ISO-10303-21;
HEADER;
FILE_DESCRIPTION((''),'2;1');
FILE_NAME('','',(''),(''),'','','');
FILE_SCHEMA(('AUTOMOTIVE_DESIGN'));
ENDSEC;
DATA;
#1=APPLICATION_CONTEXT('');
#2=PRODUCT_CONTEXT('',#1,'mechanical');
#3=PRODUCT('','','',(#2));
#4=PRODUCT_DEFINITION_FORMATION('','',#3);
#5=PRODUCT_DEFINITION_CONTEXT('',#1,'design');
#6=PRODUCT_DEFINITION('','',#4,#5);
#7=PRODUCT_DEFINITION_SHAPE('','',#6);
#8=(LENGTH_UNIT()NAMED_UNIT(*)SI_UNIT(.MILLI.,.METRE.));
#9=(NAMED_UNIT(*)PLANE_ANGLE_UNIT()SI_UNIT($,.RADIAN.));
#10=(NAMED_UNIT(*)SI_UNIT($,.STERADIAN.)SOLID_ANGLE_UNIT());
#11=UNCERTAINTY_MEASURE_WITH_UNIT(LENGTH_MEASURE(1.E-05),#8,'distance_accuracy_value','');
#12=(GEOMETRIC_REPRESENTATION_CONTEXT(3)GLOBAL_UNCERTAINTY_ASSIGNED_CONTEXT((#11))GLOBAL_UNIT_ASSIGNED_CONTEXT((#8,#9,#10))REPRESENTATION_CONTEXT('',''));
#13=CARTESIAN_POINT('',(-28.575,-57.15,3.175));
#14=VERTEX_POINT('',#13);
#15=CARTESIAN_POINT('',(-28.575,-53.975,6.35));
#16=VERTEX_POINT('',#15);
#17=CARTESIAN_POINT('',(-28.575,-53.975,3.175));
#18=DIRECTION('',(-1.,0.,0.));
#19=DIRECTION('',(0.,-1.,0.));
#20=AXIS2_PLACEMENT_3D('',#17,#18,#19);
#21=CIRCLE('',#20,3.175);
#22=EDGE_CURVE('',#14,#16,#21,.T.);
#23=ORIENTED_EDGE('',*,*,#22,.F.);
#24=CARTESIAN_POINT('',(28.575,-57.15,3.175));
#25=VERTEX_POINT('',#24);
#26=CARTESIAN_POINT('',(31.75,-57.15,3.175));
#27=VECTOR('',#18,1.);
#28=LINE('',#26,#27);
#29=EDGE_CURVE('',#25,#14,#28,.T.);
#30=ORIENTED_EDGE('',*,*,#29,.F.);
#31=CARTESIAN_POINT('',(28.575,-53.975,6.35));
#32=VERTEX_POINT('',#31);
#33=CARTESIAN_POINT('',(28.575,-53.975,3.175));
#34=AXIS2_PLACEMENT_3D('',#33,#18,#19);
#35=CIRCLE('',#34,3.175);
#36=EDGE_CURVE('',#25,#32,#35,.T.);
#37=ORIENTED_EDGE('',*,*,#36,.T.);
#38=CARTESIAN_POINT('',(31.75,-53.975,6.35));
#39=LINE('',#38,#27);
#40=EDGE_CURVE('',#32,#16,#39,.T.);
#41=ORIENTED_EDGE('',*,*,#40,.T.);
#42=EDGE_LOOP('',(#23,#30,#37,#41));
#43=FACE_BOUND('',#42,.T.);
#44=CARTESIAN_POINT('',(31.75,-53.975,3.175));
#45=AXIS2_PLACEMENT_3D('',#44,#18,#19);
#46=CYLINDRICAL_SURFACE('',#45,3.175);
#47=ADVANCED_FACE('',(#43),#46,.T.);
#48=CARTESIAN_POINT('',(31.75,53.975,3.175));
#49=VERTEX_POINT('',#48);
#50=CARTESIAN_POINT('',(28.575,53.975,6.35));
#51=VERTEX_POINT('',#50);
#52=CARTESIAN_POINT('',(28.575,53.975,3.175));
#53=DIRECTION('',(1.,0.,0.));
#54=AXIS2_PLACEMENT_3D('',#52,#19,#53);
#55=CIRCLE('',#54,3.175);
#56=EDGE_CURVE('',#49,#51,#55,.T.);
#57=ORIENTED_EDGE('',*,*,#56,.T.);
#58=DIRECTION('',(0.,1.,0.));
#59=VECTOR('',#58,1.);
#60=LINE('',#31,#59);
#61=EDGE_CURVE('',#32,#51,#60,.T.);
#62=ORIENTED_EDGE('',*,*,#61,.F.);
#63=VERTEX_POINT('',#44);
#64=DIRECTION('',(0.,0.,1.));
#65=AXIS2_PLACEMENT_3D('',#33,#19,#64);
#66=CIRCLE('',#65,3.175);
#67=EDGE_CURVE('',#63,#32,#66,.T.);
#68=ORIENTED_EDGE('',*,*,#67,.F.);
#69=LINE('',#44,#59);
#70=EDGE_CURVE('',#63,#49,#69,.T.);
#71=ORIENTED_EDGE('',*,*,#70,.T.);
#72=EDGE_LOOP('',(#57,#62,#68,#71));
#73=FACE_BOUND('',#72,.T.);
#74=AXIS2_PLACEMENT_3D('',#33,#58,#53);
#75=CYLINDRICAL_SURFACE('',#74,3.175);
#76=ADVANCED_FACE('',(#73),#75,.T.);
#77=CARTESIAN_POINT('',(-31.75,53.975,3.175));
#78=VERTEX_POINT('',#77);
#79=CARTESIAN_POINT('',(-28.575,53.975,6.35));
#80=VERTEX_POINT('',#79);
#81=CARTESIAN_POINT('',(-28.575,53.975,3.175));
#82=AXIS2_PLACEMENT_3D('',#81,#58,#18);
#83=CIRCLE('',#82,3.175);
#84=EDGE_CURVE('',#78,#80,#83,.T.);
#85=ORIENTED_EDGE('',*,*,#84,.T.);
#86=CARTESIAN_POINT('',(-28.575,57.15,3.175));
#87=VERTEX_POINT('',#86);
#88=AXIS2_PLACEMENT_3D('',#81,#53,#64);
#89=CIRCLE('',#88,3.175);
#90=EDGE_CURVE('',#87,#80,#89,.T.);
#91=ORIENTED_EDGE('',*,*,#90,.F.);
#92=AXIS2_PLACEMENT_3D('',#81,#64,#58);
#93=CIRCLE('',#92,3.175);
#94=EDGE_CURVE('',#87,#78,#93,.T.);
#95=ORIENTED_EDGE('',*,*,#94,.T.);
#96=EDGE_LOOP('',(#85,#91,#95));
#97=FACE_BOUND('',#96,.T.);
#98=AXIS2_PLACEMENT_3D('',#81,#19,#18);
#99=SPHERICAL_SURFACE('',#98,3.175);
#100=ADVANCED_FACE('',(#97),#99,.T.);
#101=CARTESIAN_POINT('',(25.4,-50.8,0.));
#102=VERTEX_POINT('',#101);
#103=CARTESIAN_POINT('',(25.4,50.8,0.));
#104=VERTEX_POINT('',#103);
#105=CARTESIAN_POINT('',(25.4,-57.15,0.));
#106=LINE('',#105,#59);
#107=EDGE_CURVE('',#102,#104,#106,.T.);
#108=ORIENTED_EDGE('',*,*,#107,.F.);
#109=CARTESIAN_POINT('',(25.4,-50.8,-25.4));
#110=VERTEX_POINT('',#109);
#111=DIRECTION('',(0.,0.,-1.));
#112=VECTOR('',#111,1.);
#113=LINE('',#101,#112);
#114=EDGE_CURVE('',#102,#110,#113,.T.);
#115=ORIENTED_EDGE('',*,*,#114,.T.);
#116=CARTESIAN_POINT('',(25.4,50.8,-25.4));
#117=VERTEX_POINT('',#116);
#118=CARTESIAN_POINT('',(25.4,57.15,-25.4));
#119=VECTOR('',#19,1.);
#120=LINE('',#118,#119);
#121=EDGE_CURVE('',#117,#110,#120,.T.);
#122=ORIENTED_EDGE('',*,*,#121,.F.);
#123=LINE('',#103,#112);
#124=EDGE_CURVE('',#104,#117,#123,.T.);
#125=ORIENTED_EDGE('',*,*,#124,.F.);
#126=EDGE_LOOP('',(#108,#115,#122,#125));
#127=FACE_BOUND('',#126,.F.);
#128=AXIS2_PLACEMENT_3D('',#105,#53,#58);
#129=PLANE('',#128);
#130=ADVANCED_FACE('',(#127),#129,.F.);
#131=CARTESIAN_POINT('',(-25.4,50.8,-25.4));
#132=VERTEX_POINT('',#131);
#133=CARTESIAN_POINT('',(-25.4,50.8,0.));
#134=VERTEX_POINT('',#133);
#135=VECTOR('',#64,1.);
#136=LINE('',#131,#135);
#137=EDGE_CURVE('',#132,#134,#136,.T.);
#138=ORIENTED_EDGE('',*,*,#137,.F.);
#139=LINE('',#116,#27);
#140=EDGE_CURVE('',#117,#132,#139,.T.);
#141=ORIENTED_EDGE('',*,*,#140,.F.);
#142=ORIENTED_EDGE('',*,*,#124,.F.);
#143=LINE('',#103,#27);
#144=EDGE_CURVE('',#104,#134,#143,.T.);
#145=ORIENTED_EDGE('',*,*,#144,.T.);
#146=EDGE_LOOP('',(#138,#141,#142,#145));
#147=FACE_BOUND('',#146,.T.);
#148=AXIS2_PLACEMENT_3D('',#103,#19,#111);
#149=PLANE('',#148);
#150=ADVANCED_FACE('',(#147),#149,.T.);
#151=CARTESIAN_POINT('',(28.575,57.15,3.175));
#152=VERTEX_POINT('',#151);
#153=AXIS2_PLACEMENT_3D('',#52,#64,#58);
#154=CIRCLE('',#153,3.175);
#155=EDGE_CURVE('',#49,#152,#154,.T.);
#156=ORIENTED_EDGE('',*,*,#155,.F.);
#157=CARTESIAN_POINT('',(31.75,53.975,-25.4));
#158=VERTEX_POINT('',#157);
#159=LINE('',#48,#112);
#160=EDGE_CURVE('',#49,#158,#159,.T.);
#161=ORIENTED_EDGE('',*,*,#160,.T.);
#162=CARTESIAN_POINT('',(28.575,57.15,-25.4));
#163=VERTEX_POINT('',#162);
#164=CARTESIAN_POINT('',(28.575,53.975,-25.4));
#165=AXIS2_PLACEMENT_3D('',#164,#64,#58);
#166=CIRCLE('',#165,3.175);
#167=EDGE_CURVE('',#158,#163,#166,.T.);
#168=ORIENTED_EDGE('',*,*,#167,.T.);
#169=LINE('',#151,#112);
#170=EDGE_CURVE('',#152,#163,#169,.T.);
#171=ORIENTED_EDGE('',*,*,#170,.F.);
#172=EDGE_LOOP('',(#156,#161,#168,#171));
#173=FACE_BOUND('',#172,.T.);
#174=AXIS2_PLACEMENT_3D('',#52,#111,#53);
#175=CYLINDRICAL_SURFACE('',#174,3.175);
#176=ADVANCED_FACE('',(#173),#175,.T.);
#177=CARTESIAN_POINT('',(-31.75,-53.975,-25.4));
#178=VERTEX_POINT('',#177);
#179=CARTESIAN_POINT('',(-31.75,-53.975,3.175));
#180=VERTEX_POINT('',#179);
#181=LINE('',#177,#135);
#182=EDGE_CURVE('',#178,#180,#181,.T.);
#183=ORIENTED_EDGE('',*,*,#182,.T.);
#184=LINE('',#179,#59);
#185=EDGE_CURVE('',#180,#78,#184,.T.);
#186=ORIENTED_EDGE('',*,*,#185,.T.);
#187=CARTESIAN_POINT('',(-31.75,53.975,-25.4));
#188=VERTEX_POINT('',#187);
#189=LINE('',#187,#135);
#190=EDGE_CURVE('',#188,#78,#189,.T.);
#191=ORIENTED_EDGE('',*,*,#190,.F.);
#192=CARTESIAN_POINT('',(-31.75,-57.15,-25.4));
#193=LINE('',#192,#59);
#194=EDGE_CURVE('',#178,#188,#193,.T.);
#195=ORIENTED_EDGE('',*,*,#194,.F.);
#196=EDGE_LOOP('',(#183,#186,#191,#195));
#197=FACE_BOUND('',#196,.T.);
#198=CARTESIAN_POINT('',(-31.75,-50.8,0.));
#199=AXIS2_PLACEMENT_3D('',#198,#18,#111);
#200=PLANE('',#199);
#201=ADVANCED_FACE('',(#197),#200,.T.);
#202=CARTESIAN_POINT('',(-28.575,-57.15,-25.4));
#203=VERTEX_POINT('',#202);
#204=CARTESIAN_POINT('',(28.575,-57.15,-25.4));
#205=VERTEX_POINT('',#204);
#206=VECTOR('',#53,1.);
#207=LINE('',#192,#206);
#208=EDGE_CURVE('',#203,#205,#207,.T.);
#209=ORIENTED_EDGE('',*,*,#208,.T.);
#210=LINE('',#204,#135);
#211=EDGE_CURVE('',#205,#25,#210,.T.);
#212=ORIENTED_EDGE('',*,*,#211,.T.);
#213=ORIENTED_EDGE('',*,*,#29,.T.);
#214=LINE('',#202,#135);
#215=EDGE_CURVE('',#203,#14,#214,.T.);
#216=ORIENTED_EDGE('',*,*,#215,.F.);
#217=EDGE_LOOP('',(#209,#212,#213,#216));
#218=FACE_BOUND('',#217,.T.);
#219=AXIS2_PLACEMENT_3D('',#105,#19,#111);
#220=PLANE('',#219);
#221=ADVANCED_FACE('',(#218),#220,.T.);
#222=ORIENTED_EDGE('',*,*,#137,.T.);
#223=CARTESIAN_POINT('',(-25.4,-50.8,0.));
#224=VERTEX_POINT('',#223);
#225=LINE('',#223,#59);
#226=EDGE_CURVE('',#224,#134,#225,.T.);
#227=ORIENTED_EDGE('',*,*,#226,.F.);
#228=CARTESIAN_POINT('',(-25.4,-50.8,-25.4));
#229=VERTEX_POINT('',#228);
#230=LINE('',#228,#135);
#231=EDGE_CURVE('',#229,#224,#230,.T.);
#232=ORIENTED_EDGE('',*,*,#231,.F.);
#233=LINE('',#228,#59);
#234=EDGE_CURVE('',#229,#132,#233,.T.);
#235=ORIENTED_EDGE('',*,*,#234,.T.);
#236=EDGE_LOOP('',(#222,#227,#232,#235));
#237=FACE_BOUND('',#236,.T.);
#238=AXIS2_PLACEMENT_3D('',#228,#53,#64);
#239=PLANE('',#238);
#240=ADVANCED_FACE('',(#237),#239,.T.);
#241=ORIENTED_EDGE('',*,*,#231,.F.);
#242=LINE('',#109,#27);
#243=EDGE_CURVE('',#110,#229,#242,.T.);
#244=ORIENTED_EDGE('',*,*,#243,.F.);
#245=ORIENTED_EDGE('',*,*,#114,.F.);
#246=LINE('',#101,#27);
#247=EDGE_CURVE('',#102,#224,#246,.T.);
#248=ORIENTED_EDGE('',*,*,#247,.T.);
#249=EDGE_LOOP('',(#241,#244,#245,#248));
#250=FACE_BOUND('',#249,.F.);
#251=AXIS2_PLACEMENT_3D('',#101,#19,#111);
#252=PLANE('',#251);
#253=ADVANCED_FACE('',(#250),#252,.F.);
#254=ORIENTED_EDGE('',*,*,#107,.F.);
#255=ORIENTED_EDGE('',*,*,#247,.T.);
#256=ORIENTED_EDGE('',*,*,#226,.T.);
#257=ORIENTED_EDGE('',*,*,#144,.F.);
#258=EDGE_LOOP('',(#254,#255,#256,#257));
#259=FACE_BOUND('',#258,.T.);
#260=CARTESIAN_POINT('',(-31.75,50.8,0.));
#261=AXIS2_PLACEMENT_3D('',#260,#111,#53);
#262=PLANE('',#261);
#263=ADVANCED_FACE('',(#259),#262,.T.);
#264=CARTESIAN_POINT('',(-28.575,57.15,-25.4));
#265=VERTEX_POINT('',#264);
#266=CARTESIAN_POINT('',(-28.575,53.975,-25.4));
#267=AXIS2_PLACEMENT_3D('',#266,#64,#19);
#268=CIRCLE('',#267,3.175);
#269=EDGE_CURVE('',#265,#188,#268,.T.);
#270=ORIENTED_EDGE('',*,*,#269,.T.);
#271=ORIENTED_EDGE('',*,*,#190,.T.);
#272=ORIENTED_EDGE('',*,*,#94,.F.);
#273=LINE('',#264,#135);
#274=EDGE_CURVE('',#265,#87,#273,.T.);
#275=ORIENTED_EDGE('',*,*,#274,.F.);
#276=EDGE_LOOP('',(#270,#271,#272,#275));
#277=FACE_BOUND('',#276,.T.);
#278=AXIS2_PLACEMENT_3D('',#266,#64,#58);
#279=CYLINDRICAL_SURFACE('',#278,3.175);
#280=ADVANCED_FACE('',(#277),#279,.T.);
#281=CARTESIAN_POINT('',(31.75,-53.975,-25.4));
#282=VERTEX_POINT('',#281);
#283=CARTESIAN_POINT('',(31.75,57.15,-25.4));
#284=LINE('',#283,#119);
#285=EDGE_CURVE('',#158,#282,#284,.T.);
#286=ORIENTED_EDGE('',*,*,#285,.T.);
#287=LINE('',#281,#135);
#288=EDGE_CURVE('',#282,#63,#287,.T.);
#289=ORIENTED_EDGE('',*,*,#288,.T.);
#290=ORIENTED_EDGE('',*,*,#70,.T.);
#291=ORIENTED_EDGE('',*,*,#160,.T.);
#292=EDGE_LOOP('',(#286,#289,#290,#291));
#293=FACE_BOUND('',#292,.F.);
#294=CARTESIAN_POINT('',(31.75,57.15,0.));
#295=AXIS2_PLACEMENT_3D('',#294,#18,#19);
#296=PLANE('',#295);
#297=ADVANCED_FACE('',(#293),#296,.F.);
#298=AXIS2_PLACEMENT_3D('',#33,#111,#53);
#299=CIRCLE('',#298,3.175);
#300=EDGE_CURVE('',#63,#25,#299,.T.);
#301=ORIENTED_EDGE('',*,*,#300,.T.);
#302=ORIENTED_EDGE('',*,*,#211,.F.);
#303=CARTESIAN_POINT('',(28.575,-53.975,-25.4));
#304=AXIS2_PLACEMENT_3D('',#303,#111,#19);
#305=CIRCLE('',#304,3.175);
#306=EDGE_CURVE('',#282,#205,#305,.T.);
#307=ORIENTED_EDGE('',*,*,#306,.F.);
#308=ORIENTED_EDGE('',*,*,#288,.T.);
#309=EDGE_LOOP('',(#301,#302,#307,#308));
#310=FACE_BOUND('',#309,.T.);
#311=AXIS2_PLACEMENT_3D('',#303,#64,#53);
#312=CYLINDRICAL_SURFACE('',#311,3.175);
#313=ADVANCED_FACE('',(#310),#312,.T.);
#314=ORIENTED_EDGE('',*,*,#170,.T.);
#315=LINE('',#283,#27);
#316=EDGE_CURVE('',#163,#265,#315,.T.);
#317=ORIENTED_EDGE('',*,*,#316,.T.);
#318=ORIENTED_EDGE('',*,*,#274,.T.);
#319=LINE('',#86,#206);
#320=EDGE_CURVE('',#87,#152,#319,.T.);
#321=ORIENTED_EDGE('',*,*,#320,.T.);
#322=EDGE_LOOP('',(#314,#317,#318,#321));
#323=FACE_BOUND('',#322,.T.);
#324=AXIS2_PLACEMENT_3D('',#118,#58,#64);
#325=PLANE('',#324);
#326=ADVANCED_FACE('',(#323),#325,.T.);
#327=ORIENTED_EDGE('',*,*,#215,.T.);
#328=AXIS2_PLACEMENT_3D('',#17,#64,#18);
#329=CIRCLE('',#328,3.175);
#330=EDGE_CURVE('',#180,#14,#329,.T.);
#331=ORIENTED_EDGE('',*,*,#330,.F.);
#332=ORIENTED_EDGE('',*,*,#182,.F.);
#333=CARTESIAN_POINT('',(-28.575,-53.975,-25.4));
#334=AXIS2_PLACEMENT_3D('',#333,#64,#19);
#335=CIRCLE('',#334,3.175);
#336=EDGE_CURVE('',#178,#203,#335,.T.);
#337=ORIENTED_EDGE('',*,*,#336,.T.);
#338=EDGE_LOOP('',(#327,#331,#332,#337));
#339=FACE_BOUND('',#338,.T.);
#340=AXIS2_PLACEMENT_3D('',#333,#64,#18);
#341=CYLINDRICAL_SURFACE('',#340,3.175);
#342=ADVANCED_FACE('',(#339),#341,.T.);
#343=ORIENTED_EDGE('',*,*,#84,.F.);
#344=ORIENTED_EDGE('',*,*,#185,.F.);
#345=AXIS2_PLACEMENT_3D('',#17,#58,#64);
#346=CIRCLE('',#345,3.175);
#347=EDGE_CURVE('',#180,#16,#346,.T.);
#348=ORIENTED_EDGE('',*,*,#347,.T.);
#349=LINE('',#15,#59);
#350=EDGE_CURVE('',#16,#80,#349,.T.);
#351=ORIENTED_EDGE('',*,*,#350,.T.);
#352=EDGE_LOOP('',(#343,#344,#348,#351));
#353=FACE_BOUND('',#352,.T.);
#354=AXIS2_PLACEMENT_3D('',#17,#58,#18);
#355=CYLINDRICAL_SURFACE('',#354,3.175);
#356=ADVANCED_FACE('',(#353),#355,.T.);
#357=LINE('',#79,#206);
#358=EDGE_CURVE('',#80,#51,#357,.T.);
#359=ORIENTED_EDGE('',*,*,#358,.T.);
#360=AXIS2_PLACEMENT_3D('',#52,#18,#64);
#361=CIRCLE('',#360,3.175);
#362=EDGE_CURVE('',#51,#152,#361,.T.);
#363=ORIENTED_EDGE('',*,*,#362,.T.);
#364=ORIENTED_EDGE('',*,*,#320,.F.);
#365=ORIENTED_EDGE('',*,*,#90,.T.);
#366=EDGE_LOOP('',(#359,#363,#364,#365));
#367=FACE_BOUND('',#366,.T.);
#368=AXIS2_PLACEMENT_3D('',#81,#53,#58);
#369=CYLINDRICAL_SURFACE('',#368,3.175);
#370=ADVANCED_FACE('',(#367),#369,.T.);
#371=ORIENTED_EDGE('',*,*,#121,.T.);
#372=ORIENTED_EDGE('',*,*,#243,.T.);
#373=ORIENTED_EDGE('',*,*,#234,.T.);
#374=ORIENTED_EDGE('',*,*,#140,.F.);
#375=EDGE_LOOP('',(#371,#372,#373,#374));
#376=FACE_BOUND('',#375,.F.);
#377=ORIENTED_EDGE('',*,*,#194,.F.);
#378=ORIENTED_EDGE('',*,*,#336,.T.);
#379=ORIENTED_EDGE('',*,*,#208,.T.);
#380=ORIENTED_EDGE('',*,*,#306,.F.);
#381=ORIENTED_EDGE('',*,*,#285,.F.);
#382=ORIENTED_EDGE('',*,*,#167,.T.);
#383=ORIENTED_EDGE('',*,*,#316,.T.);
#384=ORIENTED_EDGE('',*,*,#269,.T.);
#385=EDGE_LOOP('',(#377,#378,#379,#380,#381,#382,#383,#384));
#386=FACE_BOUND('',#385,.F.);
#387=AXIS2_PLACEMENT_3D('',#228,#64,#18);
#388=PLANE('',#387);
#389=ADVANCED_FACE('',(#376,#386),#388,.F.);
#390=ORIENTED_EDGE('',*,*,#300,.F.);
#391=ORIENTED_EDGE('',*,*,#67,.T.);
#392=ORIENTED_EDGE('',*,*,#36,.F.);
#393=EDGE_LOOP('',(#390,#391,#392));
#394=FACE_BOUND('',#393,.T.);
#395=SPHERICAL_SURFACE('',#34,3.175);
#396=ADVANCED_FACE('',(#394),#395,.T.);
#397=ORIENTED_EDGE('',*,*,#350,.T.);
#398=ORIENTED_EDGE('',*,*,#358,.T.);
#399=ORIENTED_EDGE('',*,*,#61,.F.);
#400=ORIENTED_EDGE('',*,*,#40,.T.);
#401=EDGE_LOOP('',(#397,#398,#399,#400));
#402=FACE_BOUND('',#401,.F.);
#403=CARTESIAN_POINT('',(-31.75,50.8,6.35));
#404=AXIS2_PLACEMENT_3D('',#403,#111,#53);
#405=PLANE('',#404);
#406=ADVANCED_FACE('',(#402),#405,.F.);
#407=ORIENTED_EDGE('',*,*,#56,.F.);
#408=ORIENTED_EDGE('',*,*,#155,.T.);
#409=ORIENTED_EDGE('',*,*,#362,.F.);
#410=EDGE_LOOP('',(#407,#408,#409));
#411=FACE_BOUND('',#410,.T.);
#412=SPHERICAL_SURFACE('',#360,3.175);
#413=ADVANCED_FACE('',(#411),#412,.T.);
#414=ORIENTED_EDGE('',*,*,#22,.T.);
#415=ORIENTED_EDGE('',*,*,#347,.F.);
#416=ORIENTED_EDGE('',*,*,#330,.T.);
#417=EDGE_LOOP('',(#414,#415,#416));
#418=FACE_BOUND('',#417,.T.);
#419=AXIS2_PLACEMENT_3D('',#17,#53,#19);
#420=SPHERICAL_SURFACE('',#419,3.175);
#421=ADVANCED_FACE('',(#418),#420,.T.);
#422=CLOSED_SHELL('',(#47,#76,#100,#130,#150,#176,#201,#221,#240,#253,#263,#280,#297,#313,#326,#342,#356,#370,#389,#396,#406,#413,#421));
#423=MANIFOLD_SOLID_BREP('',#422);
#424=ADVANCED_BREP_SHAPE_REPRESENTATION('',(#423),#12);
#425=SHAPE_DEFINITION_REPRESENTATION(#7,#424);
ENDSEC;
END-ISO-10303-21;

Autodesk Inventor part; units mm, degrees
ref_plane "YZ Plane" through (0, 0, 0) normal (1, 0, 0) x (0, 1, 0)
ref_plane "XZ Plane" through (0, 0, 0) normal (0, 1, 0) x (-1, 0, 0)
ref_plane "XY Plane" through (0, 0, 0) normal (0, 0, 1) x (1, 0, 0)
sketch "Sketch1" plane through (0, 0, 0) normal (0, 0, 1) x (1, 0, 0)
  line L0 (-25.4, -50.8) -> (25.4, -50.8)
  line L1 (25.4, -50.8) -> (25.4, 50.8)
  line L2 (25.4, 50.8) -> (-25.4, 50.8)
  line L3 (-25.4, 50.8) -> (-25.4, -50.8)
  line L4 (-25.4, -50.8) -> (25.4, 50.8) construction
  line L5 (25.4, -50.8) -> (-25.4, 50.8) construction
  point P0 (0, 0)
  dimension "d0" = 50.8
  dimension "d1" = 101.6
extrude "Extrusion1" add sketch "Sketch1" along normal blind 6.35
sketch "Sketch2" plane through (25.4, -50.8, 0) normal (1, 0, 0) x (0, 0, -1)
  line L0 (-6.35, 0) -> (-6.35, 101.6) projected
  line L1 (-6.35, 101.6) -> (0, 101.6)
  line L2 (0, 101.6) -> (0, 0)
  line L3 (0, 0) -> (-6.35, 0)
  line L4 (-6.35, 0) -> (-6.35, 101.6)
  point P0 (0, 50.8)
extrude "Extrusion2" add sketch "Sketch2" along normal blind 6.35
sketch "Sketch3" plane through (-25.4, -50.8, 0) normal (-1, 0, 0) x (0, 0, 1)
  point P0 (0, 50.8)
sketch "Sketch4" plane through (-25.4, -50.8, 0) normal (-1, 0, 0) x (0, 0, 1)
  line L0 (6.35, 101.6) -> (6.35, 0) projected
  line L1 (0, 0) -> (6.35, 0) projected
  line L2 (6.35, 101.6) -> (0, 101.6)
  line L3 (0, 101.6) -> (0, 0)
  line L4 (0, 0) -> (6.35, 0)
  line L5 (6.35, 0) -> (6.35, 101.6)
  point P0 (0, 50.8)
extrude "Extrusion3" add sketch "Sketch4" along normal blind 6.35
sketch "Sketch5" plane through (31.75, -50.8, 0) normal (0, -1, 0) x (1, 0, 0)
  line L0 (-63.5, 0) -> (-63.5, 6.35) projected
  line L1 (0, 6.35) -> (0, 0) projected
  line L2 (-63.5, 0) -> (0, 0)
  line L3 (0, 0) -> (0, 6.35)
  line L4 (0, 6.35) -> (-63.5, 6.35)
  line L5 (-63.5, 6.35) -> (-63.5, 0)
  point P0 (-31.75, 0)
extrude "Extrusion4" add sketch "Sketch5" along normal blind 6.35
sketch "Sketch6" plane through (31.75, 50.8, 6.35) normal (0, 1, 0) x (1, 0, 0)
  line L0 (-63.5, 0) -> (0, 0) projected
  line L1 (-63.5, 6.35) -> (0, 6.35) projected
  line L2 (-63.5, 0) -> (0, 0)
  line L3 (0, 0) -> (0, 6.35)
  line L4 (0, 6.35) -> (-63.5, 6.35)
  line L5 (-63.5, 6.35) -> (-63.5, 0)
  point P0 (-31.75, 6.35)
extrude "Extrusion5" add sketch "Sketch6" along normal blind 6.35
sketch "Sketch7" plane through (0, 0, 0) normal (0, 0, -1) x (-1, 0, 0)
  line L0 (31.75, -57.15) -> (31.75, 57.15) projected
  line L1 (31.75, -57.15) -> (25.4, -57.15)
  line L2 (25.4, -57.15) -> (25.4, 57.15)
  line L3 (25.4, 57.15) -> (31.75, 57.15)
  line L4 (31.75, 57.15) -> (31.75, -57.15)
  line L5 (-31.75, -57.15) -> (-25.4, -57.15)
  line L6 (-25.4, -57.15) -> (-25.4, 57.15)
  line L7 (-25.4, 57.15) -> (-31.75, 57.15)
  line L8 (-31.75, 57.15) -> (-31.75, -57.15)
  line L9 (25.4, -57.15) -> (-25.4, -57.15)
  line L10 (-25.4, -57.15) -> (-25.4, -50.8)
  line L11 (-25.4, -50.8) -> (25.4, -50.8)
  line L12 (25.4, -50.8) -> (25.4, -57.15)
  line L13 (25.4, 57.15) -> (-25.4, 57.15)
  line L14 (-25.4, 57.15) -> (-25.4, 50.8)
  line L15 (-25.4, 50.8) -> (25.4, 50.8)
  line L16 (25.4, 50.8) -> (25.4, 57.15)
  point P0 (0, 0)
  dimension "d12" = 6.35
  dimension "d13" = 114.3
  dimension "d14" = 6.35
  dimension "d15" = 114.3
  dimension "d16" = 50.8
  dimension "d17" = 6.35
  dimension "d18" = 6.35
  dimension "d19" = 50.8
extrude "Extrusion6" add sketch "Sketch7" along normal blind 25.4 contours L5 L8 L7 L6
sketch "Sketch8" plane through (25.4, -57.15, 0) normal (-1, 0, 0) x (0, 0, 1)
  line L0 (6.35, 0) -> (-25.4, 0) projected
  line L1 (-25.4, 0) -> (0, 0)
  line L2 (0, 0) -> (0, 6.35)
  line L3 (0, 6.35) -> (-25.4, 6.35)
  line L4 (-25.4, 6.35) -> (-25.4, 0)
  point P0 (0, 57.15)
  dimension "d22" = 25.4
  dimension "d23" = 6.35
extrude "Extrusion7" add sketch "Sketch8" along normal blind 57.15
sketch "Sketch9" plane through (25.4, 57.15, -25.4) normal (-1, 0, 0) x (0, 0, 1)
  line L0 (0, 0) -> (0, -114.3) projected
  line L1 (0, 0) -> (25.4, 0)
  line L2 (25.4, 0) -> (25.4, -6.35)
  line L3 (25.4, -6.35) -> (0, -6.35)
  line L4 (0, -6.35) -> (0, 0)
  point P0 (25.4, -57.15)
  dimension "d26" = 25.4
  dimension "d27" = 6.35
extrude "Extrusion8" add sketch "Sketch9" along normal blind 57.15
sketch "Sketch10" plane through (25.4, -50.8, 0) normal (0, 1, 0) x (1, 0, 0)
  line L0 (0, 25.4) -> (-57.15, 25.4) projected
  line L1 (-57.15, 25.4) -> (-50.8, 25.4)
  line L2 (-50.8, 25.4) -> (-50.8, 0)
  line L3 (-50.8, 0) -> (-57.15, 0)
  line L4 (-57.15, 0) -> (-57.15, 25.4)
  point P0 (-25.4, 0)
  dimension "d30" = 6.35
  dimension "d31" = 25.4
extrude "Extrusion9" add sketch "Sketch10" along normal blind 101.6
fillet "Fillet1" radius 3.175 1 edges at (0, -57.15, 6.35)
fillet "Fillet2" radius 3.175 3 edges at (-31.75, 1.5875, 6.35) (-31.75, -56.2201, 5.4201) (-31.75, -57.15, -11.1125)
fillet "Fillet3" radius 3.175 3 edges at (1.5875, 57.15, 6.35) (-30.8201, 57.15, 5.4201) (-31.75, 57.15, -11.1125)
fillet "Fillet4" radius 3.175 5 edges at (31.75, 0, 6.35) (31.75, 56.2201, 5.4201) (31.75, 57.15, -11.1125) (31.75, -56.2201, 5.4201) (31.75, -57.15, -11.1125)
properties part number "Table foot"
